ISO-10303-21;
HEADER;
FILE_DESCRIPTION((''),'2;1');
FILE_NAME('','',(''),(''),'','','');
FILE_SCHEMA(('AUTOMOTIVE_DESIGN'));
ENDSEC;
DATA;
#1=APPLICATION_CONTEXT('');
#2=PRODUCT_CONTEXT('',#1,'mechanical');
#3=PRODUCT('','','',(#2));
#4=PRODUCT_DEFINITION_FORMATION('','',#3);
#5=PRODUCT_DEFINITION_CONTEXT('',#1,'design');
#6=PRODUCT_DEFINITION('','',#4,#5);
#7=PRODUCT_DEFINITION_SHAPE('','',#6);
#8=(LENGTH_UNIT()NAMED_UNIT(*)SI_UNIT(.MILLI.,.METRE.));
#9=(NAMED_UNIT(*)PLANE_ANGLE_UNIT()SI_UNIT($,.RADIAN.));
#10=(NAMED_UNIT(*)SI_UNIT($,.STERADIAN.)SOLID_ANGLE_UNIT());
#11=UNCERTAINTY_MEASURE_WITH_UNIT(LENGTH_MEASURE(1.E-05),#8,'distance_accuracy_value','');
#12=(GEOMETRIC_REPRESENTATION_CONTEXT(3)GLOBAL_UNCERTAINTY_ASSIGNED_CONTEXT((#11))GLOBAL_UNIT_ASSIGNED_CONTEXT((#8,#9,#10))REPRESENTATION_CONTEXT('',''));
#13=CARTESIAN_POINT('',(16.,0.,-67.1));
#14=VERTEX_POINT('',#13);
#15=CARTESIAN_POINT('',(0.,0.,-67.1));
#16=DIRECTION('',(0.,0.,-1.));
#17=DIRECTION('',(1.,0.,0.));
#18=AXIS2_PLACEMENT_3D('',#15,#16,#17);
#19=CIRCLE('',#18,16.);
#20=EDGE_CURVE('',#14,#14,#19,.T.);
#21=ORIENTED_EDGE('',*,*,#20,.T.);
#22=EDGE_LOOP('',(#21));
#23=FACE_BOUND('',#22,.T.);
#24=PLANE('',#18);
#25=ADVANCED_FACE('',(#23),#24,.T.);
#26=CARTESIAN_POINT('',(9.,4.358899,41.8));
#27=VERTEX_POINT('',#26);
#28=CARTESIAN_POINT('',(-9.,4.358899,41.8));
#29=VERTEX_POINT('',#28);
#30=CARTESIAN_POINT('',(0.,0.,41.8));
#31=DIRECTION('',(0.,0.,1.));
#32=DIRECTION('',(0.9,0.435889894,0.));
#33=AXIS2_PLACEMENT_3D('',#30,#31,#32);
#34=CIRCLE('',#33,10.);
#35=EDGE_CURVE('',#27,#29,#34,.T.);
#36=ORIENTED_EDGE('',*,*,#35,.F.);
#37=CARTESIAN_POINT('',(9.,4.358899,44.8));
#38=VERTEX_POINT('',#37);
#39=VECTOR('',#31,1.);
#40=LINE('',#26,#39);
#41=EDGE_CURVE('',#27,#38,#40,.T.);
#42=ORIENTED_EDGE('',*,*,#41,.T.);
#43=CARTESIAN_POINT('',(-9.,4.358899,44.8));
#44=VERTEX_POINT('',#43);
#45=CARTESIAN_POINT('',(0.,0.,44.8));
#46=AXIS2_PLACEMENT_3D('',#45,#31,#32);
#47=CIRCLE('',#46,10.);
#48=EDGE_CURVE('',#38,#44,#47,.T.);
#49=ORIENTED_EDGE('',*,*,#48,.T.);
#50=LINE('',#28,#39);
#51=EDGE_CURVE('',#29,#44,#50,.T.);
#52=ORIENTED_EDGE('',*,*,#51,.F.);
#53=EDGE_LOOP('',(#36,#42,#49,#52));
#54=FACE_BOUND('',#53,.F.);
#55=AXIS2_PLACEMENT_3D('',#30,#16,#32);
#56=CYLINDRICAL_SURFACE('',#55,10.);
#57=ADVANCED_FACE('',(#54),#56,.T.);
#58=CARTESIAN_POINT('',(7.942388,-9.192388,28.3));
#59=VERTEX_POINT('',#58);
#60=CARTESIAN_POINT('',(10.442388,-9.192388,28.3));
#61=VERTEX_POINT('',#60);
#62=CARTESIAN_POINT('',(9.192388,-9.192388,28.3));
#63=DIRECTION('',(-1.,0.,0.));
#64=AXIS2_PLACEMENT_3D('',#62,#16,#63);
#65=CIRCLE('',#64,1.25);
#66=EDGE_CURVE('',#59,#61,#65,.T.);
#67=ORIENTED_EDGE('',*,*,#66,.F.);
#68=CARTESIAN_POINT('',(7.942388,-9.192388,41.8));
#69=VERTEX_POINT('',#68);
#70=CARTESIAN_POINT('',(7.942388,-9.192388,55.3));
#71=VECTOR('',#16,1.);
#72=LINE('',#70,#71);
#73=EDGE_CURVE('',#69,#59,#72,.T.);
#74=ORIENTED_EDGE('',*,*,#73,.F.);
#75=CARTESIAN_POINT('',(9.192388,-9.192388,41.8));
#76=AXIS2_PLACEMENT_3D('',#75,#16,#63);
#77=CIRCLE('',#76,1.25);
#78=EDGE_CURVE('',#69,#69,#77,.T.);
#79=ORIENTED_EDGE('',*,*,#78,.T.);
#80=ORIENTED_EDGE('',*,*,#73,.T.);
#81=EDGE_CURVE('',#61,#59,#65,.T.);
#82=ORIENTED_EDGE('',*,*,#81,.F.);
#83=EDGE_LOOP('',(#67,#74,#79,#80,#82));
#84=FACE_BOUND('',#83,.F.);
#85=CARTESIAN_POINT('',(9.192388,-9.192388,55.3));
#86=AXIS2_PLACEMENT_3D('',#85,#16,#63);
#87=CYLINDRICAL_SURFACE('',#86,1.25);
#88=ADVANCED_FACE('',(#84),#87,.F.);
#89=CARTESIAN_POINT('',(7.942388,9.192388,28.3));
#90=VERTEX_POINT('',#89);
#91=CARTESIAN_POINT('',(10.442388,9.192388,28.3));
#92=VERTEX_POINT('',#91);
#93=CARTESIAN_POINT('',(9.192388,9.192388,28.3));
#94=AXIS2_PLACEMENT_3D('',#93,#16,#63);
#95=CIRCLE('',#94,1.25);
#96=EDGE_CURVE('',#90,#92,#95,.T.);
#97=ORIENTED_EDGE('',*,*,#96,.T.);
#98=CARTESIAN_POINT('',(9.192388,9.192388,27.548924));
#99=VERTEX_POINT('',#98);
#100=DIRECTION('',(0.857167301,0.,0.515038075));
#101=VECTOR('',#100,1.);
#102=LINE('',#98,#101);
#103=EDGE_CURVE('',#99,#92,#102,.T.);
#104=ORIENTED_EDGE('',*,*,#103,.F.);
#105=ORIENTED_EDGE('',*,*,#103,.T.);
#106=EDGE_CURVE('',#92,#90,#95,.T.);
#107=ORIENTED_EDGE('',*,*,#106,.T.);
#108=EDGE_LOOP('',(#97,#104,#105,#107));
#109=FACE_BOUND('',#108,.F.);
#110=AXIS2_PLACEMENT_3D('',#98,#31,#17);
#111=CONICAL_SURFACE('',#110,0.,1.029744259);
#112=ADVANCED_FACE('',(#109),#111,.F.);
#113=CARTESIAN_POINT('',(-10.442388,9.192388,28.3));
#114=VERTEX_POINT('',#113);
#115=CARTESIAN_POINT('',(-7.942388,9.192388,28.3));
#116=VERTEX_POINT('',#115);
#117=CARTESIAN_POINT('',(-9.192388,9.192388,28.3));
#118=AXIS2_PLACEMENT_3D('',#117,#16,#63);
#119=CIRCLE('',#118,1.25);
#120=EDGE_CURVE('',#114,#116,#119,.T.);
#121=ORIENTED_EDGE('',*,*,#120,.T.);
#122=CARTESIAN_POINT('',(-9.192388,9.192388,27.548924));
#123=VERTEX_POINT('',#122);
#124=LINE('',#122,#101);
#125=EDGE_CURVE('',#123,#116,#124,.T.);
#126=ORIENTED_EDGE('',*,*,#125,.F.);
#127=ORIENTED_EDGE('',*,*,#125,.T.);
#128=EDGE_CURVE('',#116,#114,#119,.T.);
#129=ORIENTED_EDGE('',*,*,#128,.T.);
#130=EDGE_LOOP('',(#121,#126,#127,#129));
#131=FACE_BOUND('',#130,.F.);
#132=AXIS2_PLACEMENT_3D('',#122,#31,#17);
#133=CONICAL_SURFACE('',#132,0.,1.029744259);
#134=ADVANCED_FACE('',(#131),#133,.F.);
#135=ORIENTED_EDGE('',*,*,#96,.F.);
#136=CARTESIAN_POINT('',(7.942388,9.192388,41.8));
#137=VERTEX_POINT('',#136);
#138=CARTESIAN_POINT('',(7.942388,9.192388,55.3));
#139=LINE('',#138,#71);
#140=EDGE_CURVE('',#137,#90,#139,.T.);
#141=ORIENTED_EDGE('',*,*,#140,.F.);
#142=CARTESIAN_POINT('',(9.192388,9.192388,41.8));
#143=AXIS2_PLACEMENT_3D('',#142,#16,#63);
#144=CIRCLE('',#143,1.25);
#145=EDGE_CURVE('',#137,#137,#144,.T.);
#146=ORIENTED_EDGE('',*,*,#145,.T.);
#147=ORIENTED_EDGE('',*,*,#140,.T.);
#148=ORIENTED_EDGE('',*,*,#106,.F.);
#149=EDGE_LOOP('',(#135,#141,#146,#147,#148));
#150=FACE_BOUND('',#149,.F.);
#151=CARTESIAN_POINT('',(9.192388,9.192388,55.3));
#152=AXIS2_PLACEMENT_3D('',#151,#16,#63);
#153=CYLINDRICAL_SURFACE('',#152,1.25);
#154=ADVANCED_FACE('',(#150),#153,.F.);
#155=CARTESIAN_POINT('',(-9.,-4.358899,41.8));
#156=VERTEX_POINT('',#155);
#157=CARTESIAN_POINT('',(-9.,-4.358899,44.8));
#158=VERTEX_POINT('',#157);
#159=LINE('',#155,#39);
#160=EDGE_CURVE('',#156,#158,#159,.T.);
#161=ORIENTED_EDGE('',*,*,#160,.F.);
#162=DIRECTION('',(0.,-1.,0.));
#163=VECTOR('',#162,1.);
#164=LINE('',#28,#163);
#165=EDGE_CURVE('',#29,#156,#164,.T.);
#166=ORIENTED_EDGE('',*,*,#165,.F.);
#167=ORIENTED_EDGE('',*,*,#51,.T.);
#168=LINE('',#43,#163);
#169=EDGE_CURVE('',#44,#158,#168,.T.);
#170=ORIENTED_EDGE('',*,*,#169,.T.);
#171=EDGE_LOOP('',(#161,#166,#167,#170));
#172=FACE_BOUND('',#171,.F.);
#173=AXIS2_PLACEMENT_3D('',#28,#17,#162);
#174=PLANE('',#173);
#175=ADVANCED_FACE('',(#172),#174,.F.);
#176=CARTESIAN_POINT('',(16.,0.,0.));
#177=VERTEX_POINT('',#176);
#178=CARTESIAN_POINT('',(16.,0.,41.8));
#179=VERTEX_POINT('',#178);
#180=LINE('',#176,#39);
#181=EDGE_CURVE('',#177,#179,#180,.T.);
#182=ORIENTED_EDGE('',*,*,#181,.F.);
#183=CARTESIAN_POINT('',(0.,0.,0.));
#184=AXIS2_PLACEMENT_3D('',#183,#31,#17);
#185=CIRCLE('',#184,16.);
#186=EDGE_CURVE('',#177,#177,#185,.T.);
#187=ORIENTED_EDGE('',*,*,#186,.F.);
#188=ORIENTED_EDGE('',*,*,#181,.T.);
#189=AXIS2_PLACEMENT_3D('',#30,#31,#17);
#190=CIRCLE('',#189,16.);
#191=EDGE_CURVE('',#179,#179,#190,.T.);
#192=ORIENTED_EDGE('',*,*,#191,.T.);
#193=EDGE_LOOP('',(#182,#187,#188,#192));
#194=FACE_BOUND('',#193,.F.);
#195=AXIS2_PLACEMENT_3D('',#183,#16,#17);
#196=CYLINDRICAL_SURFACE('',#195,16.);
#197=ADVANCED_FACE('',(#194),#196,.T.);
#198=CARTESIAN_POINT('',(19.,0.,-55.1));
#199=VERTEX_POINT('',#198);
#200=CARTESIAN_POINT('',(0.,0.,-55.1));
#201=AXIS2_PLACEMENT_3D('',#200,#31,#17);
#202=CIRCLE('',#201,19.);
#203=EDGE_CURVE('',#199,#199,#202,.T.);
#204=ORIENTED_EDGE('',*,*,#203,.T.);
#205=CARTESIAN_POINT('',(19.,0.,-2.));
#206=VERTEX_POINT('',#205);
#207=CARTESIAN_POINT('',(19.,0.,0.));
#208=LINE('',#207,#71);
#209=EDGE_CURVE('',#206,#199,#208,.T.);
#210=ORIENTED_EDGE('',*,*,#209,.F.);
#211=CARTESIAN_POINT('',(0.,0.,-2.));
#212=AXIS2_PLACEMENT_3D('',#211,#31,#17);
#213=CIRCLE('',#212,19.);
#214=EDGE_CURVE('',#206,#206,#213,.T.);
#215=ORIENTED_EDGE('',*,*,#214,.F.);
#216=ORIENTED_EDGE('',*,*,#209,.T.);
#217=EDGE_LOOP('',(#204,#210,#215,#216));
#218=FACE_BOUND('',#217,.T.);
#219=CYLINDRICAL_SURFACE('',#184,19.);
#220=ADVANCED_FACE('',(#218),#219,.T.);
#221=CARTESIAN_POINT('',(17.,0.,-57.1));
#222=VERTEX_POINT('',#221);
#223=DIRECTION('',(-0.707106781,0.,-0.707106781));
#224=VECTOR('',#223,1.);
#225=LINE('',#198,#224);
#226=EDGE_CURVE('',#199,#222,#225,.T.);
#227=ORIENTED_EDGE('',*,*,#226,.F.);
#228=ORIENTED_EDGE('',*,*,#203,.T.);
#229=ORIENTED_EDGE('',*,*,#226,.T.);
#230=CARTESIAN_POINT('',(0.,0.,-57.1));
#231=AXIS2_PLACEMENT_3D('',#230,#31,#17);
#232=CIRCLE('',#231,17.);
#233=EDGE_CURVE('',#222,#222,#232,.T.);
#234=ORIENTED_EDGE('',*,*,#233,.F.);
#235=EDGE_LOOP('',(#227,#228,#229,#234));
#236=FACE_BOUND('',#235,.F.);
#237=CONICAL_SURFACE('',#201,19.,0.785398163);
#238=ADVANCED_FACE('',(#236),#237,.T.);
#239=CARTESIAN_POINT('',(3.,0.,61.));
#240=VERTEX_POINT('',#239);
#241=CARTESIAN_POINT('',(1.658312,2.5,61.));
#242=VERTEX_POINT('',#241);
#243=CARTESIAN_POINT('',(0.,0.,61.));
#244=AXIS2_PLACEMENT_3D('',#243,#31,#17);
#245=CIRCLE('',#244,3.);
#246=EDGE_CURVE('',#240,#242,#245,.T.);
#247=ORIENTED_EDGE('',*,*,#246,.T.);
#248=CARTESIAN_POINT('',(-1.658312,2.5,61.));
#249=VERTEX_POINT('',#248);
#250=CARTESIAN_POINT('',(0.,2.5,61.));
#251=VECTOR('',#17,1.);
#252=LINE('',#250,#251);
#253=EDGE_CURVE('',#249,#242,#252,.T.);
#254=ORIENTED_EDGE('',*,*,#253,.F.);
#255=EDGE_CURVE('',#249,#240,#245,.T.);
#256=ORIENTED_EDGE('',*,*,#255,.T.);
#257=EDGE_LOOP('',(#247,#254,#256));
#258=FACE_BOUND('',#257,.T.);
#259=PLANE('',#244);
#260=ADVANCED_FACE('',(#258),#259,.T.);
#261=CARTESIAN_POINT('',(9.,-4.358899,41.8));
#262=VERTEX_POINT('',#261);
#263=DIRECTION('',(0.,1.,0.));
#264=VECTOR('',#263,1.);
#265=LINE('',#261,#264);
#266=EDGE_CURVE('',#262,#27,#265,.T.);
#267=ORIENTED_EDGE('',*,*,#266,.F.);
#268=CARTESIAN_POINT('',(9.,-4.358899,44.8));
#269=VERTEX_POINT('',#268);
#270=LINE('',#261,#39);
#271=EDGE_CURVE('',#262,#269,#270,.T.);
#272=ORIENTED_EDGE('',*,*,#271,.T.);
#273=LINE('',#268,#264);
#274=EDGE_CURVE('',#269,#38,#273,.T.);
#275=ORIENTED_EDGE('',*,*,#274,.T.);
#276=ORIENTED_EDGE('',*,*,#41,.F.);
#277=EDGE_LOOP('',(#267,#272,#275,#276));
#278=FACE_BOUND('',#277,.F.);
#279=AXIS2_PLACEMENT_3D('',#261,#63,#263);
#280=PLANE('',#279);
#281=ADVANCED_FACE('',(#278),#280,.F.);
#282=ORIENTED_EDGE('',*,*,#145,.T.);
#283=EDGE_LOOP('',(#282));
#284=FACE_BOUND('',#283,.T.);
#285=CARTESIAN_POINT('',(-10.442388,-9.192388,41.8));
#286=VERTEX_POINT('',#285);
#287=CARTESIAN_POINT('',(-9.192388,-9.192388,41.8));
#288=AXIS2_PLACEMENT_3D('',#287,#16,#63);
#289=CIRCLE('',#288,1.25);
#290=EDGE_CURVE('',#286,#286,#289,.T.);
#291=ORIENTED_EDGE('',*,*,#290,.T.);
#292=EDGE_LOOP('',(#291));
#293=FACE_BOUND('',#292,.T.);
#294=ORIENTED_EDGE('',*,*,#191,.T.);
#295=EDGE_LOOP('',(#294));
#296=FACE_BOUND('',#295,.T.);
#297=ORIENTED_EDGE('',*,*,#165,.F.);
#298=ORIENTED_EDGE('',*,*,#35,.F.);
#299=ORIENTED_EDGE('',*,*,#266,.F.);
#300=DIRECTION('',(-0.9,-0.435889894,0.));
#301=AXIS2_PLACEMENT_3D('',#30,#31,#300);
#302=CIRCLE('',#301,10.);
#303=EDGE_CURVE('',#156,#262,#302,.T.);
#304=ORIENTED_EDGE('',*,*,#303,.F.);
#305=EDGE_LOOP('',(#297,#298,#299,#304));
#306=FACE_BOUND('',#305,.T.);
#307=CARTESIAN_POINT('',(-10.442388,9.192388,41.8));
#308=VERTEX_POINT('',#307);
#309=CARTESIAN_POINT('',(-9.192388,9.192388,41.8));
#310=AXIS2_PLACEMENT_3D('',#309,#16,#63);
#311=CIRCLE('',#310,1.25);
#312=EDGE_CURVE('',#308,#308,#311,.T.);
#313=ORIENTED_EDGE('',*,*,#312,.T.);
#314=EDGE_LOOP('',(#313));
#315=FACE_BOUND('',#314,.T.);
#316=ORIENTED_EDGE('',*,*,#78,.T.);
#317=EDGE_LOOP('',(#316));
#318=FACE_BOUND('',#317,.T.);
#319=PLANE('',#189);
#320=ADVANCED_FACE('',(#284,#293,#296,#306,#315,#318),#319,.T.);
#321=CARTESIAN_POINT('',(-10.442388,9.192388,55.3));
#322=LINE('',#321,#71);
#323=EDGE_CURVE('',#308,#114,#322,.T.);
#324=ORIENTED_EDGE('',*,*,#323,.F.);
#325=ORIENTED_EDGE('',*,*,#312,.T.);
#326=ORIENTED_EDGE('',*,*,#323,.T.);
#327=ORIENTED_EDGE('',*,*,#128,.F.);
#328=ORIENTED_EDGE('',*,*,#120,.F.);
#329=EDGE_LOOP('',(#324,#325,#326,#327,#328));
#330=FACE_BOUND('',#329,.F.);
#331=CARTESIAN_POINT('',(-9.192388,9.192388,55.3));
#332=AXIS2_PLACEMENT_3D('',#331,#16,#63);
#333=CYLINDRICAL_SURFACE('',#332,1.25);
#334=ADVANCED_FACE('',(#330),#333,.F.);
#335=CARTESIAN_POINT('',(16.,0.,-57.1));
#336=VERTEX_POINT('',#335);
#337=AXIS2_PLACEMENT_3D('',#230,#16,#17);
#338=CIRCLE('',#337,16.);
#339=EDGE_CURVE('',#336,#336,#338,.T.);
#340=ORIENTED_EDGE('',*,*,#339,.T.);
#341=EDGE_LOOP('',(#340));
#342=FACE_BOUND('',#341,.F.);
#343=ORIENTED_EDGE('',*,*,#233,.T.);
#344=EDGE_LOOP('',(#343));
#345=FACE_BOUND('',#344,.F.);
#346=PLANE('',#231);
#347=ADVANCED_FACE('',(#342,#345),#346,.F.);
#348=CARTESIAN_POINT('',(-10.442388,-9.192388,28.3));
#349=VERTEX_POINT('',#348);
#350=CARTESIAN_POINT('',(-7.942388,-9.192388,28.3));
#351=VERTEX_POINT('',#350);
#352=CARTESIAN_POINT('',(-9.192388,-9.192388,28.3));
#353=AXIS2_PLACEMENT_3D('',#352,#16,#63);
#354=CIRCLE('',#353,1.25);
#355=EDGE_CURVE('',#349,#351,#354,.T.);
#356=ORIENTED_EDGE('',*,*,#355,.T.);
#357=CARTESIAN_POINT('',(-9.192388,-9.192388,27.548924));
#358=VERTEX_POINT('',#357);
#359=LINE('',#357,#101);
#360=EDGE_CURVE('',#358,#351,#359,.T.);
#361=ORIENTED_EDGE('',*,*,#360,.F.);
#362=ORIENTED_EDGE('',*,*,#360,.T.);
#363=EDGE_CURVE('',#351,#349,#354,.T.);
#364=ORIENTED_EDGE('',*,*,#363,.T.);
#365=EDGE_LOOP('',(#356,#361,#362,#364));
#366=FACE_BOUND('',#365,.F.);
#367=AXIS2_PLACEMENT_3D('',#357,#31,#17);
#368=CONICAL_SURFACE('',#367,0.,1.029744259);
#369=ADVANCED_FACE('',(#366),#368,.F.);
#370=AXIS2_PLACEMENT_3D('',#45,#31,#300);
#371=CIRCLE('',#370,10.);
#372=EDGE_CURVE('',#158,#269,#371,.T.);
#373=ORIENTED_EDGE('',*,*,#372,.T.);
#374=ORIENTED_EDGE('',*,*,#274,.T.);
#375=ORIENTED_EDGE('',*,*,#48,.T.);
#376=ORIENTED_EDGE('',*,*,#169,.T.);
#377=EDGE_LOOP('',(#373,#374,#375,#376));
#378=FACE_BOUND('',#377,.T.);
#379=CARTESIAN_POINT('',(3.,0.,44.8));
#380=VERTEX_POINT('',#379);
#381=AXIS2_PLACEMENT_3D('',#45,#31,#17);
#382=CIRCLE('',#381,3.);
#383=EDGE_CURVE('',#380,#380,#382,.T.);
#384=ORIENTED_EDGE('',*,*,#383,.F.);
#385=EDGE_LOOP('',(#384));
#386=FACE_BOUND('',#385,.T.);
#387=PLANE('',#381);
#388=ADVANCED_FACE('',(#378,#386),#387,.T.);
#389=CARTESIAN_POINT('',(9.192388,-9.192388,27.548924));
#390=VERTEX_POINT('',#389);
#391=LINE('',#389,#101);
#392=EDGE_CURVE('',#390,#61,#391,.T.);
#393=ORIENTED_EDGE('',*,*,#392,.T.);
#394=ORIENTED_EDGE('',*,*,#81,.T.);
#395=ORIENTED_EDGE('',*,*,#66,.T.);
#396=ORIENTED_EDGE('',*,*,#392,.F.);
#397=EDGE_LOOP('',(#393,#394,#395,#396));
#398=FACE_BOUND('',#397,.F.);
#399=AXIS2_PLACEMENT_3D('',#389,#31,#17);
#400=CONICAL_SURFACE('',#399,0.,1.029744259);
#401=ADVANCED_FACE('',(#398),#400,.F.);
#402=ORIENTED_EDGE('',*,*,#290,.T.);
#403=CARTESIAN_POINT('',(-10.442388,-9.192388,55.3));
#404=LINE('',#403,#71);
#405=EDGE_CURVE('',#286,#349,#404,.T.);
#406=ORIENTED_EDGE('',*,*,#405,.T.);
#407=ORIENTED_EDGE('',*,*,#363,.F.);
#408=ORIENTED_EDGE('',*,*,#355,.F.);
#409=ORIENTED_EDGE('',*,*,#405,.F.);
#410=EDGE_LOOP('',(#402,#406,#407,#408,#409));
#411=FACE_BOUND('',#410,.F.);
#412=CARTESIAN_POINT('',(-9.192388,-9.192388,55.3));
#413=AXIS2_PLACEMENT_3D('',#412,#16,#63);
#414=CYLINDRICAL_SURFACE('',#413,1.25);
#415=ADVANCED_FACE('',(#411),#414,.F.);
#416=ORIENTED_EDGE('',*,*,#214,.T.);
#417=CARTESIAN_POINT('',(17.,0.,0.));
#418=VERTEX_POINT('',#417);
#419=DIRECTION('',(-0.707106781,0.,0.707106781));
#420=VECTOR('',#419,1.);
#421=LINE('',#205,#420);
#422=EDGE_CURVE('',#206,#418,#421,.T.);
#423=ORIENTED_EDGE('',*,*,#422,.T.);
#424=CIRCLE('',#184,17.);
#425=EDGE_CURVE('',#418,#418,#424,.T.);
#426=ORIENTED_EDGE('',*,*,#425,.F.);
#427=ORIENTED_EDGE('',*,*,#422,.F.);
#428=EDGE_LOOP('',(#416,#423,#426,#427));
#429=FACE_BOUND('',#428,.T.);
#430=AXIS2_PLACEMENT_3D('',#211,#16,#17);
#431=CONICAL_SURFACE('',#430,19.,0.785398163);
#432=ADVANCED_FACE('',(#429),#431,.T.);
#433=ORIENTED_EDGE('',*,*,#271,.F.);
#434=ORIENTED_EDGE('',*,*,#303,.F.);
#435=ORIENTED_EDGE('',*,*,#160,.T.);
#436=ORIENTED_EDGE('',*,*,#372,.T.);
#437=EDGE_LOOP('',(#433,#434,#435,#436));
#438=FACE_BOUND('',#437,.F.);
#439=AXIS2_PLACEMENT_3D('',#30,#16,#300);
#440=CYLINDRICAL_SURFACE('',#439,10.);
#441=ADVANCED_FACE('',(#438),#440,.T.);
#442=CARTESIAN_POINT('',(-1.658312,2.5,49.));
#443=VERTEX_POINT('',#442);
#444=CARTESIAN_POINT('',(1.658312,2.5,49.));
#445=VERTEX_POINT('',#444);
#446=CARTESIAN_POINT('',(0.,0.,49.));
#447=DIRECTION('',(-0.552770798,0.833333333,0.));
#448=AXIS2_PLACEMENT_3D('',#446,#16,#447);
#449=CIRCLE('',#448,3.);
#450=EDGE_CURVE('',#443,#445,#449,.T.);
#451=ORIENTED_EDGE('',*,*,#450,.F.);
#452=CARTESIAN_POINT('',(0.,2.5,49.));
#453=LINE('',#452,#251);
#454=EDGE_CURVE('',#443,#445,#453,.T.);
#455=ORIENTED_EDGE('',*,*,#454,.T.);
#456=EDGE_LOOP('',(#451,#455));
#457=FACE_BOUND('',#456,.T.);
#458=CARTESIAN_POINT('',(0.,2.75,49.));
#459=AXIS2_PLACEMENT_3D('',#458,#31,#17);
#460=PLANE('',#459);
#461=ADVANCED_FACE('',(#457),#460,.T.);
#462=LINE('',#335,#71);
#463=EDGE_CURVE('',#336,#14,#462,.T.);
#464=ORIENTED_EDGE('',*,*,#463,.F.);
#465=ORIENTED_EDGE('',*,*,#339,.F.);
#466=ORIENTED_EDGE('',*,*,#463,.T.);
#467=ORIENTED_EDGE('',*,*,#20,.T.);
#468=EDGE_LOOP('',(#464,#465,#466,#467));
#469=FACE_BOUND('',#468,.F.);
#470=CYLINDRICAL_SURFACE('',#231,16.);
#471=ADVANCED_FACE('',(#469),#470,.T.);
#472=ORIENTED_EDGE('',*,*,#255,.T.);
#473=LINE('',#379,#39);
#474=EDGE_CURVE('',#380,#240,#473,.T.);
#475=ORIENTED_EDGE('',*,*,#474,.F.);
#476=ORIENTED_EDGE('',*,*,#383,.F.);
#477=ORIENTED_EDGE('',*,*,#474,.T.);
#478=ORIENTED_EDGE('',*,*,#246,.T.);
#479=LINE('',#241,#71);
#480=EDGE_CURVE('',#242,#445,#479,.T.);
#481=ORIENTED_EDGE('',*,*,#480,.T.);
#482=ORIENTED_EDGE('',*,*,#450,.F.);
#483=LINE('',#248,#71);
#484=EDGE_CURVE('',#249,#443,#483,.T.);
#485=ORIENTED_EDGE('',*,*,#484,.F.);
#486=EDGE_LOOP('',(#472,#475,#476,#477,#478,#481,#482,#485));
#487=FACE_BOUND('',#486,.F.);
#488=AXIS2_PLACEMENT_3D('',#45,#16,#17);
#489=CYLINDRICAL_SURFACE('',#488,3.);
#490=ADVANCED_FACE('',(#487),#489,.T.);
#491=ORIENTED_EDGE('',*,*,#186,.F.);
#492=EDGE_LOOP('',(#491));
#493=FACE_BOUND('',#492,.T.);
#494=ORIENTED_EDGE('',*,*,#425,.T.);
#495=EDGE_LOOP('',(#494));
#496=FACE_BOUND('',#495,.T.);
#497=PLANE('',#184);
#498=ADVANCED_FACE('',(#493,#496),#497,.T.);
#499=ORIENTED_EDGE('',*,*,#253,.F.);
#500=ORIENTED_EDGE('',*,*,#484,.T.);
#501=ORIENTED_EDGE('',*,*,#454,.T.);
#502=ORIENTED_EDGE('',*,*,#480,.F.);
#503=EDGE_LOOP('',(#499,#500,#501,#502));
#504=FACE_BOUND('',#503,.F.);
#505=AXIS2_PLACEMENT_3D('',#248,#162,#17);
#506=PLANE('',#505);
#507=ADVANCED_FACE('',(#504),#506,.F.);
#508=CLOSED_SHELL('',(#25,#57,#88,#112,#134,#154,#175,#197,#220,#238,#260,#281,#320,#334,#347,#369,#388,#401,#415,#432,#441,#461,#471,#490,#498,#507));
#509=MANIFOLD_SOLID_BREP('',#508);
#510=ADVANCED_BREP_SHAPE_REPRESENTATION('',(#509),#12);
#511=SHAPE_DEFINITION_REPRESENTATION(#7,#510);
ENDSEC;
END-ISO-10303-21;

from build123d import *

# Parameters (mm, degrees)
F0_R      = 19
F1_DEPTH  = 57.1
F2_R      = 16
F3_DEPTH  = 41.8
F4_R      = 16
F5_DEPTH  = 10
F7_DEPTH  = 3
F8_R      = 3
F9_DEPTH  = 16.2
F10_W     = 3.3166247904
F10_H     = 0.5
F11_DEPTH = 12
F12_SIZE  = 2
F14_D     = 2.5
F14_DEPTH = 13.5
F14_TIP   = 0.7510757738


with BuildPart() as f1:
    # F0 (on Top) → F1 (new body)
    with BuildSketch(Plane.XY):
        Circle(F0_R)
    extrude(amount=-F1_DEPTH)

    # F2 (on face) → F3 (join)
    with BuildSketch(Plane.XY):
        Circle(F2_R)
    extrude(amount=F3_DEPTH)

    # F4 (on face) → F5 (join)
    with BuildSketch(Plane(origin=(0, 0, -57.1), x_dir=(1, 0, 0), z_dir=(0, 0, -1))):
        Circle(F4_R)
    extrude(amount=F5_DEPTH)

    # F6 (on face) → F7 (join)
    with BuildSketch(Plane.XY.offset(41.8)):
        with BuildLine():
            ThreePointArc((9, 4.3588989435), (0, 10), (-9, 4.3588989435))
            Line((-9, 4.3588989435), (-9, -4.3588989435))
            ThreePointArc((-9, -4.3588989435), (0, -10), (9, -4.3588989435))
            Line((9, -4.3588989435), (9, 4.3588989435))
        make_face()
    extrude(amount=F7_DEPTH)

    # F8 (on face) → F9 (join)
    with BuildSketch(Plane.XY.offset(44.8)):
        Circle(F8_R)
    extrude(amount=F9_DEPTH)

    # F10 (on face) → F11 (cut)
    with BuildSketch(Plane.XY.offset(61)):
        with Locations((0, 2.75)):
            Rectangle(F10_W, F10_H)
    extrude(amount=-F11_DEPTH, mode=Mode.SUBTRACT)

    # F12
    f12_edges = [f1.edges().sort_by_distance(p)[0] for p in [
        (-19, 0, -57.1),
        (-19, 0, 0),
    ]]
    chamfer(f12_edges, length=F12_SIZE)

    # F14
    with Locations(Plane.XY.offset(41.8)):
        with Locations((-9.1923881554, 9.1923881554), (9.1923881554, 9.1923881554), (9.1923881554, -9.1923881554), (-9.1923881554, -9.1923881554)):
            Hole(F14_D / 2, depth=F14_DEPTH)
            with Locations((0, 0, -(F14_DEPTH + F14_TIP / 2))):  # 118° drill point
                Cone(0, F14_D / 2, F14_TIP, mode=Mode.SUBTRACT)


solid = f1.part
